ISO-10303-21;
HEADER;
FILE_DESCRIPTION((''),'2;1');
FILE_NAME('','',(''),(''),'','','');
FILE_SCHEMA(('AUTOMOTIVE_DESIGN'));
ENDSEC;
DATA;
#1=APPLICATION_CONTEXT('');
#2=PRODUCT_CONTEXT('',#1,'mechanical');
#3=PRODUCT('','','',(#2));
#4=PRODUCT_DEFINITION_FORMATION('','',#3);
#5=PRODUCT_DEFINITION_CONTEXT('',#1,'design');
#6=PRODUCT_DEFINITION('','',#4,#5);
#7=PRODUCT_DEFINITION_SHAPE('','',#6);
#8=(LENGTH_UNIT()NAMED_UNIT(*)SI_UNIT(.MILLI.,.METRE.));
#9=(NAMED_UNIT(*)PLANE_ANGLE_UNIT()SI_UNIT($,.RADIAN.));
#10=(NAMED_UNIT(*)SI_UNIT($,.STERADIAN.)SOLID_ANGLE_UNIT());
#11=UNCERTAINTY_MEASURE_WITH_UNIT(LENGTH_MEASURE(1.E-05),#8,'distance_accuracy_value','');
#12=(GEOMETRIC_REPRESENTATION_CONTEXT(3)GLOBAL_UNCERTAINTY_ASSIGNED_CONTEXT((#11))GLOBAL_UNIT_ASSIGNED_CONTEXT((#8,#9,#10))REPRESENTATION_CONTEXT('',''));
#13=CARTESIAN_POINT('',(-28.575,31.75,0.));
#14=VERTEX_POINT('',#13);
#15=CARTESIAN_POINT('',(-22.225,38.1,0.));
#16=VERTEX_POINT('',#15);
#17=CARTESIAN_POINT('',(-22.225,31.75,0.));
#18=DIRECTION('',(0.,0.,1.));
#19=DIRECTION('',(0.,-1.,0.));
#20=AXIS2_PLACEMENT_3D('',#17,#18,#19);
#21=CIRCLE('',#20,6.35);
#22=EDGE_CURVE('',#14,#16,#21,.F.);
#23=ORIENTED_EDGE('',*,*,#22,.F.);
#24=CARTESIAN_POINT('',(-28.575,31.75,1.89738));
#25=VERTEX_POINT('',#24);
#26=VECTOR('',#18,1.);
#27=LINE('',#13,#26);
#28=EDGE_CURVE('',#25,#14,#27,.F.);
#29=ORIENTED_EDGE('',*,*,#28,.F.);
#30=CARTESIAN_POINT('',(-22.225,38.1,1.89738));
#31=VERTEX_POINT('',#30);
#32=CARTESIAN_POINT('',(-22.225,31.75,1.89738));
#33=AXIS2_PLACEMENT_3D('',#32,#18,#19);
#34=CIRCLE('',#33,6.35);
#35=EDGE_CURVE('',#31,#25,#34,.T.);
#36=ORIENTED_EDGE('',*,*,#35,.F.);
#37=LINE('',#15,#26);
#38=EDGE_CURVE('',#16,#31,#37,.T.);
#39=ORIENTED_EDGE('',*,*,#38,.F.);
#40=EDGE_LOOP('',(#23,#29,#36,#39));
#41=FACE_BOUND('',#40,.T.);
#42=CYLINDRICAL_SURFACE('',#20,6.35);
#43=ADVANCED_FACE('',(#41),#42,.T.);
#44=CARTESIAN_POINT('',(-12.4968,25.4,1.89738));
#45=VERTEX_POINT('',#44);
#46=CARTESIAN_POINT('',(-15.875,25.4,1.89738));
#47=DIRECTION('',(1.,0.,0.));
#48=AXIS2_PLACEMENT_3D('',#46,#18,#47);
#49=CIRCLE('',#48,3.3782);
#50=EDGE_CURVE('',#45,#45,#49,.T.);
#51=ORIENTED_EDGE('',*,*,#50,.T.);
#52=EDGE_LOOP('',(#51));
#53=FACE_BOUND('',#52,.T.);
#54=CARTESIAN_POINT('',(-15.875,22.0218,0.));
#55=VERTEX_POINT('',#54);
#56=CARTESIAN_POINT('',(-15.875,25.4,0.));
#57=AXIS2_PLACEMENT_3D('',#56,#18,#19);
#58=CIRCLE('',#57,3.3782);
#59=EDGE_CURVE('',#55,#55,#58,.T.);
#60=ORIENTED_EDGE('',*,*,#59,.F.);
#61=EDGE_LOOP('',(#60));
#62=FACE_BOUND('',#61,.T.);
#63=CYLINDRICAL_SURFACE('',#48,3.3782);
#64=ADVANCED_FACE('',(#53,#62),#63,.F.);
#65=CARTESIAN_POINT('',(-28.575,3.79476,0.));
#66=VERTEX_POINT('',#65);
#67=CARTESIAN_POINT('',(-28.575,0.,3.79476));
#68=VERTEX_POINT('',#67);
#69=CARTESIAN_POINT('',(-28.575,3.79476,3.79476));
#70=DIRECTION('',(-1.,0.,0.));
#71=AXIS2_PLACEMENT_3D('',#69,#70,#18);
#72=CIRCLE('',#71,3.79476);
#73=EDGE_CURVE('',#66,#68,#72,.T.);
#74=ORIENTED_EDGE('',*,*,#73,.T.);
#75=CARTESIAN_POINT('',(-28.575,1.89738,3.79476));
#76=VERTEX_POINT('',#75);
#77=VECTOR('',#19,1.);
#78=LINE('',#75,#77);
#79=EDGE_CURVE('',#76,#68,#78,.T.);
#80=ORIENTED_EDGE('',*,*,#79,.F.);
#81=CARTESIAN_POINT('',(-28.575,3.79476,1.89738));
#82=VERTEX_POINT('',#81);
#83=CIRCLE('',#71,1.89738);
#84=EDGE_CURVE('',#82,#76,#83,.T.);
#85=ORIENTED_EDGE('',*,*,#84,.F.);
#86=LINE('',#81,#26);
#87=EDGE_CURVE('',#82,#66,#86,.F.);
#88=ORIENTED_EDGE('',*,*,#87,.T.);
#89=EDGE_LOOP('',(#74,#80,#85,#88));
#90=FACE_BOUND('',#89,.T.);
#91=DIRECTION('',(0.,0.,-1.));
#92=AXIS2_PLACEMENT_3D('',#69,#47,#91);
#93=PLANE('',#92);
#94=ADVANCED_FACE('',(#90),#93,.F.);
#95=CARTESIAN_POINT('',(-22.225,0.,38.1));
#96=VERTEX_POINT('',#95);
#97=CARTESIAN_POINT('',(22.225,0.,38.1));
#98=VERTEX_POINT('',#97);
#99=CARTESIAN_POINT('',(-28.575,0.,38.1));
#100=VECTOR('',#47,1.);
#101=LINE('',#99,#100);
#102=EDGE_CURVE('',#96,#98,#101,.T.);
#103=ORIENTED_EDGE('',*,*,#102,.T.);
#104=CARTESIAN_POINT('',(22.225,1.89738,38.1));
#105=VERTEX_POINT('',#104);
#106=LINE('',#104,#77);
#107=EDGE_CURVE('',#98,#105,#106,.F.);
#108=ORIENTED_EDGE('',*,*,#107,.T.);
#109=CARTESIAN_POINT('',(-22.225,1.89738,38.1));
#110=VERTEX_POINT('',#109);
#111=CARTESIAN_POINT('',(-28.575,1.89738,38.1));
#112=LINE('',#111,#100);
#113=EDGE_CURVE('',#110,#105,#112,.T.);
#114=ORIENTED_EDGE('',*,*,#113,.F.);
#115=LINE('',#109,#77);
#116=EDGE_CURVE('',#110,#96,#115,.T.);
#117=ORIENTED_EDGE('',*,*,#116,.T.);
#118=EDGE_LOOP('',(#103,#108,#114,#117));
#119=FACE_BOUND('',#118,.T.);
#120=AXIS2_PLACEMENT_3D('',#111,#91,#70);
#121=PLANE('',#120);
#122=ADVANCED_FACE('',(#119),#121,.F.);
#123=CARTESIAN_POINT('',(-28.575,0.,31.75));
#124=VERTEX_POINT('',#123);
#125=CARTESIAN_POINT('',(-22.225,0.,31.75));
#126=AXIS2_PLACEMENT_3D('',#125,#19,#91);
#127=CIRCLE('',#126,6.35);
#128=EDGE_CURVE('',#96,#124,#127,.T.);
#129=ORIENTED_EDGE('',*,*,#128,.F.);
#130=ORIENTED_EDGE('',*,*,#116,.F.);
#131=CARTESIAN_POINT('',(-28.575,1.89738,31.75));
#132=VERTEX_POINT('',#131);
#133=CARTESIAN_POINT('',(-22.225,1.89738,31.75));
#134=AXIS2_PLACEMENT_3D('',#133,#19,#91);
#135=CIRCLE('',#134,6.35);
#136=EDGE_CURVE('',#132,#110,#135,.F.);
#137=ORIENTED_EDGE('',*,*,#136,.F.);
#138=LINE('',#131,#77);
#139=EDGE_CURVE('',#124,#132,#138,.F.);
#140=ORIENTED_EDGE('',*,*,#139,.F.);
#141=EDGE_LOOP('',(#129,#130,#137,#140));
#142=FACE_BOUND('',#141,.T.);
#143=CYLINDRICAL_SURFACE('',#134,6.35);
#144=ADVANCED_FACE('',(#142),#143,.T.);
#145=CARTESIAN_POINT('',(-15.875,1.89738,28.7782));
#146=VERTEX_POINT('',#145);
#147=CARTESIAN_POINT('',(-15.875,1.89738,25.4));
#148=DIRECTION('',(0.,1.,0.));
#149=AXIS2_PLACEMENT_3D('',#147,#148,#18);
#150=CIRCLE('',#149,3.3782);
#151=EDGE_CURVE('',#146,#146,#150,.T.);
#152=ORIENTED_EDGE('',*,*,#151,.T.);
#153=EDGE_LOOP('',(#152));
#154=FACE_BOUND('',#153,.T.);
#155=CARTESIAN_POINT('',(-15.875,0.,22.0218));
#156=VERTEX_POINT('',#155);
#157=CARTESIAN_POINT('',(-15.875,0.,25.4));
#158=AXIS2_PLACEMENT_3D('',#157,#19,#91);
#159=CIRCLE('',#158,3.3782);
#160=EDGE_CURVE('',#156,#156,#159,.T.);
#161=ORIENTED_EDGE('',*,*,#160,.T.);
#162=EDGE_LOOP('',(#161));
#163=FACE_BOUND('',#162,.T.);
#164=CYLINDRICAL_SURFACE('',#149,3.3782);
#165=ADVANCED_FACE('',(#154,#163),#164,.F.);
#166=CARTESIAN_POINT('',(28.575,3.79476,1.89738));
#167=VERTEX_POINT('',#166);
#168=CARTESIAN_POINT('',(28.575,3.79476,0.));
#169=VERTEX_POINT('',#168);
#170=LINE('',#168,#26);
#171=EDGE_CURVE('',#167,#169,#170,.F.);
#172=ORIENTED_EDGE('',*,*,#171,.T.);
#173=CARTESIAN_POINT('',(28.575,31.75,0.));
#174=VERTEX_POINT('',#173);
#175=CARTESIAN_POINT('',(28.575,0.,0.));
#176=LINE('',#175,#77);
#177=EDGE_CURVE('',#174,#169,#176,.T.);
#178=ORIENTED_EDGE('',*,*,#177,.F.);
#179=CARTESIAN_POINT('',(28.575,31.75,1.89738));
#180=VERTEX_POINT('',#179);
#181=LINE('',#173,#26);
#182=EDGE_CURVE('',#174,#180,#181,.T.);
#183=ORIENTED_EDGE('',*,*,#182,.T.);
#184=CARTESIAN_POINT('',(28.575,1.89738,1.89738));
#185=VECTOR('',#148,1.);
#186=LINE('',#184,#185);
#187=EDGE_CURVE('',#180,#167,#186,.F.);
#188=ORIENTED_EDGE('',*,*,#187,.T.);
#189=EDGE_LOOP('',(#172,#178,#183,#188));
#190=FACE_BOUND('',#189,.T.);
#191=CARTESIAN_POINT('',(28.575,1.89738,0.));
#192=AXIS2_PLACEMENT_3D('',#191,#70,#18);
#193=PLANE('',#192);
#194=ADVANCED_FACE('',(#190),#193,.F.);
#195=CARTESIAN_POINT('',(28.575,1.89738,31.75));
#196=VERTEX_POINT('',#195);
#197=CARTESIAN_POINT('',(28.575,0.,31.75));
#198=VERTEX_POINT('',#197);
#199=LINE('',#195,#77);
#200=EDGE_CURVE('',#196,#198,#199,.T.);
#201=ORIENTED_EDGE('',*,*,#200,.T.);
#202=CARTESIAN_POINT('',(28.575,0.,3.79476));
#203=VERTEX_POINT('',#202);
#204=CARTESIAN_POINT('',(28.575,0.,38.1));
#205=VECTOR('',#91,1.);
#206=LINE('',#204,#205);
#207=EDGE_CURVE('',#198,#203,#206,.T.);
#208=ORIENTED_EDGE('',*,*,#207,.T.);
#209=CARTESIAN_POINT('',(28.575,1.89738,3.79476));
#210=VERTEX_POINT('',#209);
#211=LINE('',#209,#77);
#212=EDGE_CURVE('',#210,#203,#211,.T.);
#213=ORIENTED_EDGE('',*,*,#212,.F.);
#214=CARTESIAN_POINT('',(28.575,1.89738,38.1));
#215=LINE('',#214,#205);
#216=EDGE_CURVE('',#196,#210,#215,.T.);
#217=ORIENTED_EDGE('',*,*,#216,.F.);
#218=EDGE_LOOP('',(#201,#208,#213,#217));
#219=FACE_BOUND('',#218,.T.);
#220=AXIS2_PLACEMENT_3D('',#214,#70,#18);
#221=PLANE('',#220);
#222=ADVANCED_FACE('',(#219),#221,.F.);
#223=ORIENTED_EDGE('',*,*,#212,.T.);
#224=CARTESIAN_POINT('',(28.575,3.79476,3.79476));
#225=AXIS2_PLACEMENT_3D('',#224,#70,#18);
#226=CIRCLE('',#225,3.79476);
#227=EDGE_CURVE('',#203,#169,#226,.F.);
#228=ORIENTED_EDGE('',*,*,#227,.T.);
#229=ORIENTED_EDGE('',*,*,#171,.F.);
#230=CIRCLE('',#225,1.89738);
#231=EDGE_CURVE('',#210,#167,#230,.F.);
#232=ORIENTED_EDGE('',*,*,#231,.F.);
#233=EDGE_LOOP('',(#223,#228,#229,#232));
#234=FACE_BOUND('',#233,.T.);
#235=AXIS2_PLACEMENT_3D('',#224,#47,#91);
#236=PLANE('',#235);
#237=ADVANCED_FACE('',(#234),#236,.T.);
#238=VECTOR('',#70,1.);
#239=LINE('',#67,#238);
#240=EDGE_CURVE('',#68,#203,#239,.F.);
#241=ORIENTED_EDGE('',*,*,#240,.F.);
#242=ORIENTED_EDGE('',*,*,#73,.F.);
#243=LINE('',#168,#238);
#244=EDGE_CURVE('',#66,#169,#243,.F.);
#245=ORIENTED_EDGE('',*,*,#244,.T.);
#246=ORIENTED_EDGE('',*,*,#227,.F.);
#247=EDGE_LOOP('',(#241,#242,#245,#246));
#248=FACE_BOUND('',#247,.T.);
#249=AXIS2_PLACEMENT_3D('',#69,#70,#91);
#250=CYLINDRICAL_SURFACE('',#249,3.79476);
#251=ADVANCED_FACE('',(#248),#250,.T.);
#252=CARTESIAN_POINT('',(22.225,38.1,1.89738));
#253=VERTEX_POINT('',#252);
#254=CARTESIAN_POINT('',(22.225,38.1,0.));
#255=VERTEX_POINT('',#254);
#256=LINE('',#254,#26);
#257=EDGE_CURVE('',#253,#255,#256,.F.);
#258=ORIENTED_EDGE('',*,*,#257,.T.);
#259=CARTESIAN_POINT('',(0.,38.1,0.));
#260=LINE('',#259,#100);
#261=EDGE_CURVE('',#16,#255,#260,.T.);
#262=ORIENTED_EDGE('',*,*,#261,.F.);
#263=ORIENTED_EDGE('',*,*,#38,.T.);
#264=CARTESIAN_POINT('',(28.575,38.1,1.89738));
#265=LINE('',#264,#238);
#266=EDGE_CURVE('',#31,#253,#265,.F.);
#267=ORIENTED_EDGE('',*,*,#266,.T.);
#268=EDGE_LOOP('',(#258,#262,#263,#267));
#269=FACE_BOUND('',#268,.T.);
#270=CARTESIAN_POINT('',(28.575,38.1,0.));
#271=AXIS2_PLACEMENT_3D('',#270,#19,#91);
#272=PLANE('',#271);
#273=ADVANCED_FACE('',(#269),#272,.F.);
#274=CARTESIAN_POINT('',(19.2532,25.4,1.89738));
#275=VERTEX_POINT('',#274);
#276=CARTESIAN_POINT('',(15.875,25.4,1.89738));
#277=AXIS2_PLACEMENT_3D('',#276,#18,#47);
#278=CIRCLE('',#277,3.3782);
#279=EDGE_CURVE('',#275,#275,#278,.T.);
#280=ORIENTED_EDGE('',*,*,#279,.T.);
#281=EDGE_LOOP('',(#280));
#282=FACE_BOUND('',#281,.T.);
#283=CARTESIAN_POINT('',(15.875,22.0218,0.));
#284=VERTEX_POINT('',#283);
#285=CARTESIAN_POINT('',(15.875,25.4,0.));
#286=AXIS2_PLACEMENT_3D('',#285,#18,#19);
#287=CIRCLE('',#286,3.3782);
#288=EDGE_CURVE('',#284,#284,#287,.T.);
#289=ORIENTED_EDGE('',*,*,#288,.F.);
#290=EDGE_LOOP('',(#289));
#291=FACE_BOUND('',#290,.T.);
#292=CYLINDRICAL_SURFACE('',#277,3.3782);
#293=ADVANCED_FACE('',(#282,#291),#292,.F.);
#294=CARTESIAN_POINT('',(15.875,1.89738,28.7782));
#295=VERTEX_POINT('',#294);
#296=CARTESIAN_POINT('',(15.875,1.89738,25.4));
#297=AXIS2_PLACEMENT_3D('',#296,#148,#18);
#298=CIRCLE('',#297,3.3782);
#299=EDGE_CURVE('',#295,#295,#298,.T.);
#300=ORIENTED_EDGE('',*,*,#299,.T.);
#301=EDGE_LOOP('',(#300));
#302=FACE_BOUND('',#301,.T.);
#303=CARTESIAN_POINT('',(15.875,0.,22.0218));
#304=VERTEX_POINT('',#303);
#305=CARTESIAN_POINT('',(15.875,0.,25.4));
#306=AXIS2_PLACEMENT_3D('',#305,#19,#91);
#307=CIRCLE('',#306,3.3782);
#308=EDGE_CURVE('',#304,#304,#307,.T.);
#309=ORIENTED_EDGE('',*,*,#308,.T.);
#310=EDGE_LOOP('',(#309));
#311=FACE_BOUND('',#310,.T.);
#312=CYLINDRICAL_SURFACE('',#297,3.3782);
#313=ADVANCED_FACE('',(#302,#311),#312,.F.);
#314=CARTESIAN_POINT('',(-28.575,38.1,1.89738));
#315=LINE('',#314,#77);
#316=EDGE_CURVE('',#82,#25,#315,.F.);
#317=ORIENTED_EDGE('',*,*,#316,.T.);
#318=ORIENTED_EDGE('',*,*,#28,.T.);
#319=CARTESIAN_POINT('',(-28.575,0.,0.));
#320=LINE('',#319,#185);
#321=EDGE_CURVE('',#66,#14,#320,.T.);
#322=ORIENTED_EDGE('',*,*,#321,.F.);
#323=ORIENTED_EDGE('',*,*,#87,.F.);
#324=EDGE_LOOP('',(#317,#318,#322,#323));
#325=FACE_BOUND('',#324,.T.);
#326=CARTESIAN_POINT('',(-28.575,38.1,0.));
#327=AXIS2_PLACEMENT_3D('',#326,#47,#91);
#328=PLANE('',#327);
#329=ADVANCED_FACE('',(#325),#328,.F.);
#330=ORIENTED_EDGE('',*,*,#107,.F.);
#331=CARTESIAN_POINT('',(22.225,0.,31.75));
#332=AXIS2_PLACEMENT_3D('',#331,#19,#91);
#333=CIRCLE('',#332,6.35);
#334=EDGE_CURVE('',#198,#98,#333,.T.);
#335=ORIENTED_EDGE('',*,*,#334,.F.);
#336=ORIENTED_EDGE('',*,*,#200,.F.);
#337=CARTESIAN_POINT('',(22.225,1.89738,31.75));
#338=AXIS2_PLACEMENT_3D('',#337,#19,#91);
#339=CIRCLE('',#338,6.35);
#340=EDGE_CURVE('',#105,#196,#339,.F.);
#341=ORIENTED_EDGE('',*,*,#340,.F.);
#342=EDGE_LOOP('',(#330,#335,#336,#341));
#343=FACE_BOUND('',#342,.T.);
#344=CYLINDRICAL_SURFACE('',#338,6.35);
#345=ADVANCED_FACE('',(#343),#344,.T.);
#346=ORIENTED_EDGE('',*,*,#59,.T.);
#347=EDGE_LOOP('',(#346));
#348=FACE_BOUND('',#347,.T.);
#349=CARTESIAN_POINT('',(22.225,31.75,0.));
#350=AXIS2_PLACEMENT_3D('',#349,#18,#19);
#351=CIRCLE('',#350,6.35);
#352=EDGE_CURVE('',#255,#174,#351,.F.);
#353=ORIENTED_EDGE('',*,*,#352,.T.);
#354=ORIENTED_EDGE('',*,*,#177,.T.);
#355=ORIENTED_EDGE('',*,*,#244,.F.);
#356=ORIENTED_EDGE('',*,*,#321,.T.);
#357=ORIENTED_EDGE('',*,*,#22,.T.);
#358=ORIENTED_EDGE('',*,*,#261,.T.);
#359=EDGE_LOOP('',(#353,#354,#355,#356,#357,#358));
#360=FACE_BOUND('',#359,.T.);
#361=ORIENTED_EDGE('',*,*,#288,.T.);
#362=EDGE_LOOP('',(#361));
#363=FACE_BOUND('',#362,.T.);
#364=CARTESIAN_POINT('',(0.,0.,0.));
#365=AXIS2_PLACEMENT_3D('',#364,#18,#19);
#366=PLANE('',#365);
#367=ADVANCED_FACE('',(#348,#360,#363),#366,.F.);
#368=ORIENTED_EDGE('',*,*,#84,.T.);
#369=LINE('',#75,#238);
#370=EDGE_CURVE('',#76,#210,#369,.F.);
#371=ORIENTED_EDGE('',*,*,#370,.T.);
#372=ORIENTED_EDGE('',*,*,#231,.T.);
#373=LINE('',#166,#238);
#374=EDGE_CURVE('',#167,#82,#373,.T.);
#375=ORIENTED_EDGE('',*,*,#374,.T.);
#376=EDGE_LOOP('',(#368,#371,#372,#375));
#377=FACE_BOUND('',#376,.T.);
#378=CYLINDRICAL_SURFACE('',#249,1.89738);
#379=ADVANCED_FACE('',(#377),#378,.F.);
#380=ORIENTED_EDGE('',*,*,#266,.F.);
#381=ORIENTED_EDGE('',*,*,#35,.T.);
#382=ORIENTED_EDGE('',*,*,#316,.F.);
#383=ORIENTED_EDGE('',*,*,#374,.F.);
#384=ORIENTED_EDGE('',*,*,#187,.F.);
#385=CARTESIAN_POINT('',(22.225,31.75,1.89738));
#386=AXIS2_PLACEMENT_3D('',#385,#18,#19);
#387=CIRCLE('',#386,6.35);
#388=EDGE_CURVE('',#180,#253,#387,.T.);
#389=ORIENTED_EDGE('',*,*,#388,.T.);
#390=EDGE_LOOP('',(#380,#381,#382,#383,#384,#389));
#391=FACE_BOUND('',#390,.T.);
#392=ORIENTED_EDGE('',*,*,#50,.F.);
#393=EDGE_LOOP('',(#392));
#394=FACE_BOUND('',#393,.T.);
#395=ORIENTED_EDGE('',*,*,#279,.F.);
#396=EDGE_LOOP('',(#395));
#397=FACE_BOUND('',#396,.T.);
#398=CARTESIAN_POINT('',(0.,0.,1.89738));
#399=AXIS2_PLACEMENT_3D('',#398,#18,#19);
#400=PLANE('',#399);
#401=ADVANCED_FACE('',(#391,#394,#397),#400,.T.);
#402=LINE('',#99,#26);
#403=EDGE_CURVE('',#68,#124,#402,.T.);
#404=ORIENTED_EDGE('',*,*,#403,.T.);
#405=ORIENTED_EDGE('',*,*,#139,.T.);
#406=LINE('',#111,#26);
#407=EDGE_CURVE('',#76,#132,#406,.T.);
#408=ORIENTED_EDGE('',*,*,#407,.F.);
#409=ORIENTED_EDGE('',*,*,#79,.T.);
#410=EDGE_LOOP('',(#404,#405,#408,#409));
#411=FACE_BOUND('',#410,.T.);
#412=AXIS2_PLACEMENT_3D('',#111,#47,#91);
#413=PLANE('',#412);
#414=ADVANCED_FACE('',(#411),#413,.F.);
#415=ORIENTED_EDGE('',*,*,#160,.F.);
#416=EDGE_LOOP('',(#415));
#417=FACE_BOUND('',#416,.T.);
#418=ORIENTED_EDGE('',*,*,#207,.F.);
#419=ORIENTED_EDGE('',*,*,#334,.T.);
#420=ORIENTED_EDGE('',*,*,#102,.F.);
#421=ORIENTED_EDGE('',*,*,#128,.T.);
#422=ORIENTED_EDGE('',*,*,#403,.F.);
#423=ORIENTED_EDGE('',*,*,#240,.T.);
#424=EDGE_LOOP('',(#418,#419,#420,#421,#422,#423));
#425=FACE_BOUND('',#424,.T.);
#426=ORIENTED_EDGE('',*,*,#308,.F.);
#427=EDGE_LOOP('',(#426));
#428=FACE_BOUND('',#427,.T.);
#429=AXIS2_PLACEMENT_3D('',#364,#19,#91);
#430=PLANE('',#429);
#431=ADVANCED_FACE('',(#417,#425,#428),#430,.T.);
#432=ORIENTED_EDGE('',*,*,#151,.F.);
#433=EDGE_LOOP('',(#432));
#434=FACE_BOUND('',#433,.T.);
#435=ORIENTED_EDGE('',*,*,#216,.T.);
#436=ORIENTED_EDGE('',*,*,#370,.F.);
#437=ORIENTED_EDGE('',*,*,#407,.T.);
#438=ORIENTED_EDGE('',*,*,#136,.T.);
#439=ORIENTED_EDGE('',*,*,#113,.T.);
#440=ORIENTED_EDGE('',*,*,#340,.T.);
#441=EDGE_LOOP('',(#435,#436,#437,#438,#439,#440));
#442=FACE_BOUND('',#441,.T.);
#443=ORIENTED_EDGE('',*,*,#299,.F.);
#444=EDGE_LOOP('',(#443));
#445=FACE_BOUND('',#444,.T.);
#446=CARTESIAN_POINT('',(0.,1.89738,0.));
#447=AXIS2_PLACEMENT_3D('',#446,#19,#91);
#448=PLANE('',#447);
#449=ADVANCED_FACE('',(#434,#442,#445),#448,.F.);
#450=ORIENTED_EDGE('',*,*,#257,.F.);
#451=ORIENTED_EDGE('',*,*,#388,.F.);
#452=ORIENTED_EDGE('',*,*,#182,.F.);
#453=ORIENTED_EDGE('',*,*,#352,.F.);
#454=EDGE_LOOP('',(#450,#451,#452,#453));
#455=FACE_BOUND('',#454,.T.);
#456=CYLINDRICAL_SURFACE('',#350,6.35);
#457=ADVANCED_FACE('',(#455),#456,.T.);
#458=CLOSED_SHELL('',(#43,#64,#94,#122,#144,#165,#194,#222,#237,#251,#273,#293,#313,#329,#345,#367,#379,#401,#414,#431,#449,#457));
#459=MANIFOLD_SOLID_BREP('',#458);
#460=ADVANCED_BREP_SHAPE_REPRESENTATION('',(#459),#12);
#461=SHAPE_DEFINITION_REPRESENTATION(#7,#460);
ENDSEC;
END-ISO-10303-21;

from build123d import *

# Parameters (mm, degrees)
SKETCH1_W                    = 57.15
SKETCH1_H                    = 38.1
BASE_FLANGE1_DEPTH           = 1.89738
EDGE_FLANGE1_STRIP_W         = 11.38428
EDGE_FLANGE1_STRIP_H         = 1.89738
EDGE_FLANGE1_STRIP_CUT_DEPTH = 57.15
EDGE_FLANGE1_DEPTH           = 57.15
F_1_4_CLEARANCE_HOLE1_D      = 6.7564
F_1_4_CLEARANCE_HOLE2_D      = 6.7564
FILLET1_R                    = 6.35


# Sheet-metal steps are written as plain solids
with BuildPart() as part:
    # Sketch1 → Base-Flange1 (new body)
    with BuildSketch(Plane(origin=(0, 0, 0), x_dir=(1, 0, 0), z_dir=(0, 1, 0))):
        with Locations((0, -19.05)):
            Rectangle(SKETCH1_W, SKETCH1_H)
    extrude(amount=BASE_FLANGE1_DEPTH)

    # Edge-Flange1 strip (across the edge) → Edge-Flange1 strip cut (cut)
    with BuildSketch(Plane(origin=(28.575, 1.89738, 0), x_dir=(0, 0, 1), z_dir=(-1, 0, 0))):
        with Locations((-1.89738, -0.94869)):
            Rectangle(EDGE_FLANGE1_STRIP_W, EDGE_FLANGE1_STRIP_H)
    extrude(amount=EDGE_FLANGE1_STRIP_CUT_DEPTH, mode=Mode.SUBTRACT)

    # Edge-Flange1 section (across the edge) → Edge-Flange1 (add)
    with BuildSketch(Plane(origin=(28.575, 1.89738, 0), x_dir=(0, 0, 1), z_dir=(-1, 0, 0))):
        with BuildLine():
            Line((0, 1.89738), (0, 36.20262))
            Line((0, 36.20262), (1.89738, 36.20262))
            Line((1.89738, 36.20262), (1.89738, 1.89738))
            ThreePointArc((1.89738, 1.89738), (2.453109736, 0.555729736), (3.79476, 0))
            Line((3.79476, 0), (3.79476, -1.89738))
            ThreePointArc((3.79476, -1.89738), (1.111459471, -0.785920529), (0, 1.89738))
        make_face()
    extrude(amount=EDGE_FLANGE1_DEPTH)

    # 1/4 Clearance Hole1 (through all)
    with Locations(Plane(origin=(0, 1.89738, 0), x_dir=(1, 0, 0), z_dir=(0, 1, 0))):
        with Locations((-15.875, -25.4), (15.875, -25.4)):
            Hole(F_1_4_CLEARANCE_HOLE1_D / 2)

    # 1/4 Clearance Hole2 (through all)
    with Locations(Plane.XY.offset(1.89738)):
        with Locations((-15.875, 25.4), (15.875, 25.4)):
            Hole(F_1_4_CLEARANCE_HOLE2_D / 2)

    # Fillet1
    fillet1_edges = [part.edges().sort_by_distance(p)[0] for p in [
        (28.575, 38.1, 0.94869),
        (-28.575, 38.1, 0.94869),
        (28.575, 0.94869, 38.1),
        (-28.575, 0.94869, 38.1),
    ]]
    fillet(fillet1_edges, radius=FILLET1_R)


solid = part.part
